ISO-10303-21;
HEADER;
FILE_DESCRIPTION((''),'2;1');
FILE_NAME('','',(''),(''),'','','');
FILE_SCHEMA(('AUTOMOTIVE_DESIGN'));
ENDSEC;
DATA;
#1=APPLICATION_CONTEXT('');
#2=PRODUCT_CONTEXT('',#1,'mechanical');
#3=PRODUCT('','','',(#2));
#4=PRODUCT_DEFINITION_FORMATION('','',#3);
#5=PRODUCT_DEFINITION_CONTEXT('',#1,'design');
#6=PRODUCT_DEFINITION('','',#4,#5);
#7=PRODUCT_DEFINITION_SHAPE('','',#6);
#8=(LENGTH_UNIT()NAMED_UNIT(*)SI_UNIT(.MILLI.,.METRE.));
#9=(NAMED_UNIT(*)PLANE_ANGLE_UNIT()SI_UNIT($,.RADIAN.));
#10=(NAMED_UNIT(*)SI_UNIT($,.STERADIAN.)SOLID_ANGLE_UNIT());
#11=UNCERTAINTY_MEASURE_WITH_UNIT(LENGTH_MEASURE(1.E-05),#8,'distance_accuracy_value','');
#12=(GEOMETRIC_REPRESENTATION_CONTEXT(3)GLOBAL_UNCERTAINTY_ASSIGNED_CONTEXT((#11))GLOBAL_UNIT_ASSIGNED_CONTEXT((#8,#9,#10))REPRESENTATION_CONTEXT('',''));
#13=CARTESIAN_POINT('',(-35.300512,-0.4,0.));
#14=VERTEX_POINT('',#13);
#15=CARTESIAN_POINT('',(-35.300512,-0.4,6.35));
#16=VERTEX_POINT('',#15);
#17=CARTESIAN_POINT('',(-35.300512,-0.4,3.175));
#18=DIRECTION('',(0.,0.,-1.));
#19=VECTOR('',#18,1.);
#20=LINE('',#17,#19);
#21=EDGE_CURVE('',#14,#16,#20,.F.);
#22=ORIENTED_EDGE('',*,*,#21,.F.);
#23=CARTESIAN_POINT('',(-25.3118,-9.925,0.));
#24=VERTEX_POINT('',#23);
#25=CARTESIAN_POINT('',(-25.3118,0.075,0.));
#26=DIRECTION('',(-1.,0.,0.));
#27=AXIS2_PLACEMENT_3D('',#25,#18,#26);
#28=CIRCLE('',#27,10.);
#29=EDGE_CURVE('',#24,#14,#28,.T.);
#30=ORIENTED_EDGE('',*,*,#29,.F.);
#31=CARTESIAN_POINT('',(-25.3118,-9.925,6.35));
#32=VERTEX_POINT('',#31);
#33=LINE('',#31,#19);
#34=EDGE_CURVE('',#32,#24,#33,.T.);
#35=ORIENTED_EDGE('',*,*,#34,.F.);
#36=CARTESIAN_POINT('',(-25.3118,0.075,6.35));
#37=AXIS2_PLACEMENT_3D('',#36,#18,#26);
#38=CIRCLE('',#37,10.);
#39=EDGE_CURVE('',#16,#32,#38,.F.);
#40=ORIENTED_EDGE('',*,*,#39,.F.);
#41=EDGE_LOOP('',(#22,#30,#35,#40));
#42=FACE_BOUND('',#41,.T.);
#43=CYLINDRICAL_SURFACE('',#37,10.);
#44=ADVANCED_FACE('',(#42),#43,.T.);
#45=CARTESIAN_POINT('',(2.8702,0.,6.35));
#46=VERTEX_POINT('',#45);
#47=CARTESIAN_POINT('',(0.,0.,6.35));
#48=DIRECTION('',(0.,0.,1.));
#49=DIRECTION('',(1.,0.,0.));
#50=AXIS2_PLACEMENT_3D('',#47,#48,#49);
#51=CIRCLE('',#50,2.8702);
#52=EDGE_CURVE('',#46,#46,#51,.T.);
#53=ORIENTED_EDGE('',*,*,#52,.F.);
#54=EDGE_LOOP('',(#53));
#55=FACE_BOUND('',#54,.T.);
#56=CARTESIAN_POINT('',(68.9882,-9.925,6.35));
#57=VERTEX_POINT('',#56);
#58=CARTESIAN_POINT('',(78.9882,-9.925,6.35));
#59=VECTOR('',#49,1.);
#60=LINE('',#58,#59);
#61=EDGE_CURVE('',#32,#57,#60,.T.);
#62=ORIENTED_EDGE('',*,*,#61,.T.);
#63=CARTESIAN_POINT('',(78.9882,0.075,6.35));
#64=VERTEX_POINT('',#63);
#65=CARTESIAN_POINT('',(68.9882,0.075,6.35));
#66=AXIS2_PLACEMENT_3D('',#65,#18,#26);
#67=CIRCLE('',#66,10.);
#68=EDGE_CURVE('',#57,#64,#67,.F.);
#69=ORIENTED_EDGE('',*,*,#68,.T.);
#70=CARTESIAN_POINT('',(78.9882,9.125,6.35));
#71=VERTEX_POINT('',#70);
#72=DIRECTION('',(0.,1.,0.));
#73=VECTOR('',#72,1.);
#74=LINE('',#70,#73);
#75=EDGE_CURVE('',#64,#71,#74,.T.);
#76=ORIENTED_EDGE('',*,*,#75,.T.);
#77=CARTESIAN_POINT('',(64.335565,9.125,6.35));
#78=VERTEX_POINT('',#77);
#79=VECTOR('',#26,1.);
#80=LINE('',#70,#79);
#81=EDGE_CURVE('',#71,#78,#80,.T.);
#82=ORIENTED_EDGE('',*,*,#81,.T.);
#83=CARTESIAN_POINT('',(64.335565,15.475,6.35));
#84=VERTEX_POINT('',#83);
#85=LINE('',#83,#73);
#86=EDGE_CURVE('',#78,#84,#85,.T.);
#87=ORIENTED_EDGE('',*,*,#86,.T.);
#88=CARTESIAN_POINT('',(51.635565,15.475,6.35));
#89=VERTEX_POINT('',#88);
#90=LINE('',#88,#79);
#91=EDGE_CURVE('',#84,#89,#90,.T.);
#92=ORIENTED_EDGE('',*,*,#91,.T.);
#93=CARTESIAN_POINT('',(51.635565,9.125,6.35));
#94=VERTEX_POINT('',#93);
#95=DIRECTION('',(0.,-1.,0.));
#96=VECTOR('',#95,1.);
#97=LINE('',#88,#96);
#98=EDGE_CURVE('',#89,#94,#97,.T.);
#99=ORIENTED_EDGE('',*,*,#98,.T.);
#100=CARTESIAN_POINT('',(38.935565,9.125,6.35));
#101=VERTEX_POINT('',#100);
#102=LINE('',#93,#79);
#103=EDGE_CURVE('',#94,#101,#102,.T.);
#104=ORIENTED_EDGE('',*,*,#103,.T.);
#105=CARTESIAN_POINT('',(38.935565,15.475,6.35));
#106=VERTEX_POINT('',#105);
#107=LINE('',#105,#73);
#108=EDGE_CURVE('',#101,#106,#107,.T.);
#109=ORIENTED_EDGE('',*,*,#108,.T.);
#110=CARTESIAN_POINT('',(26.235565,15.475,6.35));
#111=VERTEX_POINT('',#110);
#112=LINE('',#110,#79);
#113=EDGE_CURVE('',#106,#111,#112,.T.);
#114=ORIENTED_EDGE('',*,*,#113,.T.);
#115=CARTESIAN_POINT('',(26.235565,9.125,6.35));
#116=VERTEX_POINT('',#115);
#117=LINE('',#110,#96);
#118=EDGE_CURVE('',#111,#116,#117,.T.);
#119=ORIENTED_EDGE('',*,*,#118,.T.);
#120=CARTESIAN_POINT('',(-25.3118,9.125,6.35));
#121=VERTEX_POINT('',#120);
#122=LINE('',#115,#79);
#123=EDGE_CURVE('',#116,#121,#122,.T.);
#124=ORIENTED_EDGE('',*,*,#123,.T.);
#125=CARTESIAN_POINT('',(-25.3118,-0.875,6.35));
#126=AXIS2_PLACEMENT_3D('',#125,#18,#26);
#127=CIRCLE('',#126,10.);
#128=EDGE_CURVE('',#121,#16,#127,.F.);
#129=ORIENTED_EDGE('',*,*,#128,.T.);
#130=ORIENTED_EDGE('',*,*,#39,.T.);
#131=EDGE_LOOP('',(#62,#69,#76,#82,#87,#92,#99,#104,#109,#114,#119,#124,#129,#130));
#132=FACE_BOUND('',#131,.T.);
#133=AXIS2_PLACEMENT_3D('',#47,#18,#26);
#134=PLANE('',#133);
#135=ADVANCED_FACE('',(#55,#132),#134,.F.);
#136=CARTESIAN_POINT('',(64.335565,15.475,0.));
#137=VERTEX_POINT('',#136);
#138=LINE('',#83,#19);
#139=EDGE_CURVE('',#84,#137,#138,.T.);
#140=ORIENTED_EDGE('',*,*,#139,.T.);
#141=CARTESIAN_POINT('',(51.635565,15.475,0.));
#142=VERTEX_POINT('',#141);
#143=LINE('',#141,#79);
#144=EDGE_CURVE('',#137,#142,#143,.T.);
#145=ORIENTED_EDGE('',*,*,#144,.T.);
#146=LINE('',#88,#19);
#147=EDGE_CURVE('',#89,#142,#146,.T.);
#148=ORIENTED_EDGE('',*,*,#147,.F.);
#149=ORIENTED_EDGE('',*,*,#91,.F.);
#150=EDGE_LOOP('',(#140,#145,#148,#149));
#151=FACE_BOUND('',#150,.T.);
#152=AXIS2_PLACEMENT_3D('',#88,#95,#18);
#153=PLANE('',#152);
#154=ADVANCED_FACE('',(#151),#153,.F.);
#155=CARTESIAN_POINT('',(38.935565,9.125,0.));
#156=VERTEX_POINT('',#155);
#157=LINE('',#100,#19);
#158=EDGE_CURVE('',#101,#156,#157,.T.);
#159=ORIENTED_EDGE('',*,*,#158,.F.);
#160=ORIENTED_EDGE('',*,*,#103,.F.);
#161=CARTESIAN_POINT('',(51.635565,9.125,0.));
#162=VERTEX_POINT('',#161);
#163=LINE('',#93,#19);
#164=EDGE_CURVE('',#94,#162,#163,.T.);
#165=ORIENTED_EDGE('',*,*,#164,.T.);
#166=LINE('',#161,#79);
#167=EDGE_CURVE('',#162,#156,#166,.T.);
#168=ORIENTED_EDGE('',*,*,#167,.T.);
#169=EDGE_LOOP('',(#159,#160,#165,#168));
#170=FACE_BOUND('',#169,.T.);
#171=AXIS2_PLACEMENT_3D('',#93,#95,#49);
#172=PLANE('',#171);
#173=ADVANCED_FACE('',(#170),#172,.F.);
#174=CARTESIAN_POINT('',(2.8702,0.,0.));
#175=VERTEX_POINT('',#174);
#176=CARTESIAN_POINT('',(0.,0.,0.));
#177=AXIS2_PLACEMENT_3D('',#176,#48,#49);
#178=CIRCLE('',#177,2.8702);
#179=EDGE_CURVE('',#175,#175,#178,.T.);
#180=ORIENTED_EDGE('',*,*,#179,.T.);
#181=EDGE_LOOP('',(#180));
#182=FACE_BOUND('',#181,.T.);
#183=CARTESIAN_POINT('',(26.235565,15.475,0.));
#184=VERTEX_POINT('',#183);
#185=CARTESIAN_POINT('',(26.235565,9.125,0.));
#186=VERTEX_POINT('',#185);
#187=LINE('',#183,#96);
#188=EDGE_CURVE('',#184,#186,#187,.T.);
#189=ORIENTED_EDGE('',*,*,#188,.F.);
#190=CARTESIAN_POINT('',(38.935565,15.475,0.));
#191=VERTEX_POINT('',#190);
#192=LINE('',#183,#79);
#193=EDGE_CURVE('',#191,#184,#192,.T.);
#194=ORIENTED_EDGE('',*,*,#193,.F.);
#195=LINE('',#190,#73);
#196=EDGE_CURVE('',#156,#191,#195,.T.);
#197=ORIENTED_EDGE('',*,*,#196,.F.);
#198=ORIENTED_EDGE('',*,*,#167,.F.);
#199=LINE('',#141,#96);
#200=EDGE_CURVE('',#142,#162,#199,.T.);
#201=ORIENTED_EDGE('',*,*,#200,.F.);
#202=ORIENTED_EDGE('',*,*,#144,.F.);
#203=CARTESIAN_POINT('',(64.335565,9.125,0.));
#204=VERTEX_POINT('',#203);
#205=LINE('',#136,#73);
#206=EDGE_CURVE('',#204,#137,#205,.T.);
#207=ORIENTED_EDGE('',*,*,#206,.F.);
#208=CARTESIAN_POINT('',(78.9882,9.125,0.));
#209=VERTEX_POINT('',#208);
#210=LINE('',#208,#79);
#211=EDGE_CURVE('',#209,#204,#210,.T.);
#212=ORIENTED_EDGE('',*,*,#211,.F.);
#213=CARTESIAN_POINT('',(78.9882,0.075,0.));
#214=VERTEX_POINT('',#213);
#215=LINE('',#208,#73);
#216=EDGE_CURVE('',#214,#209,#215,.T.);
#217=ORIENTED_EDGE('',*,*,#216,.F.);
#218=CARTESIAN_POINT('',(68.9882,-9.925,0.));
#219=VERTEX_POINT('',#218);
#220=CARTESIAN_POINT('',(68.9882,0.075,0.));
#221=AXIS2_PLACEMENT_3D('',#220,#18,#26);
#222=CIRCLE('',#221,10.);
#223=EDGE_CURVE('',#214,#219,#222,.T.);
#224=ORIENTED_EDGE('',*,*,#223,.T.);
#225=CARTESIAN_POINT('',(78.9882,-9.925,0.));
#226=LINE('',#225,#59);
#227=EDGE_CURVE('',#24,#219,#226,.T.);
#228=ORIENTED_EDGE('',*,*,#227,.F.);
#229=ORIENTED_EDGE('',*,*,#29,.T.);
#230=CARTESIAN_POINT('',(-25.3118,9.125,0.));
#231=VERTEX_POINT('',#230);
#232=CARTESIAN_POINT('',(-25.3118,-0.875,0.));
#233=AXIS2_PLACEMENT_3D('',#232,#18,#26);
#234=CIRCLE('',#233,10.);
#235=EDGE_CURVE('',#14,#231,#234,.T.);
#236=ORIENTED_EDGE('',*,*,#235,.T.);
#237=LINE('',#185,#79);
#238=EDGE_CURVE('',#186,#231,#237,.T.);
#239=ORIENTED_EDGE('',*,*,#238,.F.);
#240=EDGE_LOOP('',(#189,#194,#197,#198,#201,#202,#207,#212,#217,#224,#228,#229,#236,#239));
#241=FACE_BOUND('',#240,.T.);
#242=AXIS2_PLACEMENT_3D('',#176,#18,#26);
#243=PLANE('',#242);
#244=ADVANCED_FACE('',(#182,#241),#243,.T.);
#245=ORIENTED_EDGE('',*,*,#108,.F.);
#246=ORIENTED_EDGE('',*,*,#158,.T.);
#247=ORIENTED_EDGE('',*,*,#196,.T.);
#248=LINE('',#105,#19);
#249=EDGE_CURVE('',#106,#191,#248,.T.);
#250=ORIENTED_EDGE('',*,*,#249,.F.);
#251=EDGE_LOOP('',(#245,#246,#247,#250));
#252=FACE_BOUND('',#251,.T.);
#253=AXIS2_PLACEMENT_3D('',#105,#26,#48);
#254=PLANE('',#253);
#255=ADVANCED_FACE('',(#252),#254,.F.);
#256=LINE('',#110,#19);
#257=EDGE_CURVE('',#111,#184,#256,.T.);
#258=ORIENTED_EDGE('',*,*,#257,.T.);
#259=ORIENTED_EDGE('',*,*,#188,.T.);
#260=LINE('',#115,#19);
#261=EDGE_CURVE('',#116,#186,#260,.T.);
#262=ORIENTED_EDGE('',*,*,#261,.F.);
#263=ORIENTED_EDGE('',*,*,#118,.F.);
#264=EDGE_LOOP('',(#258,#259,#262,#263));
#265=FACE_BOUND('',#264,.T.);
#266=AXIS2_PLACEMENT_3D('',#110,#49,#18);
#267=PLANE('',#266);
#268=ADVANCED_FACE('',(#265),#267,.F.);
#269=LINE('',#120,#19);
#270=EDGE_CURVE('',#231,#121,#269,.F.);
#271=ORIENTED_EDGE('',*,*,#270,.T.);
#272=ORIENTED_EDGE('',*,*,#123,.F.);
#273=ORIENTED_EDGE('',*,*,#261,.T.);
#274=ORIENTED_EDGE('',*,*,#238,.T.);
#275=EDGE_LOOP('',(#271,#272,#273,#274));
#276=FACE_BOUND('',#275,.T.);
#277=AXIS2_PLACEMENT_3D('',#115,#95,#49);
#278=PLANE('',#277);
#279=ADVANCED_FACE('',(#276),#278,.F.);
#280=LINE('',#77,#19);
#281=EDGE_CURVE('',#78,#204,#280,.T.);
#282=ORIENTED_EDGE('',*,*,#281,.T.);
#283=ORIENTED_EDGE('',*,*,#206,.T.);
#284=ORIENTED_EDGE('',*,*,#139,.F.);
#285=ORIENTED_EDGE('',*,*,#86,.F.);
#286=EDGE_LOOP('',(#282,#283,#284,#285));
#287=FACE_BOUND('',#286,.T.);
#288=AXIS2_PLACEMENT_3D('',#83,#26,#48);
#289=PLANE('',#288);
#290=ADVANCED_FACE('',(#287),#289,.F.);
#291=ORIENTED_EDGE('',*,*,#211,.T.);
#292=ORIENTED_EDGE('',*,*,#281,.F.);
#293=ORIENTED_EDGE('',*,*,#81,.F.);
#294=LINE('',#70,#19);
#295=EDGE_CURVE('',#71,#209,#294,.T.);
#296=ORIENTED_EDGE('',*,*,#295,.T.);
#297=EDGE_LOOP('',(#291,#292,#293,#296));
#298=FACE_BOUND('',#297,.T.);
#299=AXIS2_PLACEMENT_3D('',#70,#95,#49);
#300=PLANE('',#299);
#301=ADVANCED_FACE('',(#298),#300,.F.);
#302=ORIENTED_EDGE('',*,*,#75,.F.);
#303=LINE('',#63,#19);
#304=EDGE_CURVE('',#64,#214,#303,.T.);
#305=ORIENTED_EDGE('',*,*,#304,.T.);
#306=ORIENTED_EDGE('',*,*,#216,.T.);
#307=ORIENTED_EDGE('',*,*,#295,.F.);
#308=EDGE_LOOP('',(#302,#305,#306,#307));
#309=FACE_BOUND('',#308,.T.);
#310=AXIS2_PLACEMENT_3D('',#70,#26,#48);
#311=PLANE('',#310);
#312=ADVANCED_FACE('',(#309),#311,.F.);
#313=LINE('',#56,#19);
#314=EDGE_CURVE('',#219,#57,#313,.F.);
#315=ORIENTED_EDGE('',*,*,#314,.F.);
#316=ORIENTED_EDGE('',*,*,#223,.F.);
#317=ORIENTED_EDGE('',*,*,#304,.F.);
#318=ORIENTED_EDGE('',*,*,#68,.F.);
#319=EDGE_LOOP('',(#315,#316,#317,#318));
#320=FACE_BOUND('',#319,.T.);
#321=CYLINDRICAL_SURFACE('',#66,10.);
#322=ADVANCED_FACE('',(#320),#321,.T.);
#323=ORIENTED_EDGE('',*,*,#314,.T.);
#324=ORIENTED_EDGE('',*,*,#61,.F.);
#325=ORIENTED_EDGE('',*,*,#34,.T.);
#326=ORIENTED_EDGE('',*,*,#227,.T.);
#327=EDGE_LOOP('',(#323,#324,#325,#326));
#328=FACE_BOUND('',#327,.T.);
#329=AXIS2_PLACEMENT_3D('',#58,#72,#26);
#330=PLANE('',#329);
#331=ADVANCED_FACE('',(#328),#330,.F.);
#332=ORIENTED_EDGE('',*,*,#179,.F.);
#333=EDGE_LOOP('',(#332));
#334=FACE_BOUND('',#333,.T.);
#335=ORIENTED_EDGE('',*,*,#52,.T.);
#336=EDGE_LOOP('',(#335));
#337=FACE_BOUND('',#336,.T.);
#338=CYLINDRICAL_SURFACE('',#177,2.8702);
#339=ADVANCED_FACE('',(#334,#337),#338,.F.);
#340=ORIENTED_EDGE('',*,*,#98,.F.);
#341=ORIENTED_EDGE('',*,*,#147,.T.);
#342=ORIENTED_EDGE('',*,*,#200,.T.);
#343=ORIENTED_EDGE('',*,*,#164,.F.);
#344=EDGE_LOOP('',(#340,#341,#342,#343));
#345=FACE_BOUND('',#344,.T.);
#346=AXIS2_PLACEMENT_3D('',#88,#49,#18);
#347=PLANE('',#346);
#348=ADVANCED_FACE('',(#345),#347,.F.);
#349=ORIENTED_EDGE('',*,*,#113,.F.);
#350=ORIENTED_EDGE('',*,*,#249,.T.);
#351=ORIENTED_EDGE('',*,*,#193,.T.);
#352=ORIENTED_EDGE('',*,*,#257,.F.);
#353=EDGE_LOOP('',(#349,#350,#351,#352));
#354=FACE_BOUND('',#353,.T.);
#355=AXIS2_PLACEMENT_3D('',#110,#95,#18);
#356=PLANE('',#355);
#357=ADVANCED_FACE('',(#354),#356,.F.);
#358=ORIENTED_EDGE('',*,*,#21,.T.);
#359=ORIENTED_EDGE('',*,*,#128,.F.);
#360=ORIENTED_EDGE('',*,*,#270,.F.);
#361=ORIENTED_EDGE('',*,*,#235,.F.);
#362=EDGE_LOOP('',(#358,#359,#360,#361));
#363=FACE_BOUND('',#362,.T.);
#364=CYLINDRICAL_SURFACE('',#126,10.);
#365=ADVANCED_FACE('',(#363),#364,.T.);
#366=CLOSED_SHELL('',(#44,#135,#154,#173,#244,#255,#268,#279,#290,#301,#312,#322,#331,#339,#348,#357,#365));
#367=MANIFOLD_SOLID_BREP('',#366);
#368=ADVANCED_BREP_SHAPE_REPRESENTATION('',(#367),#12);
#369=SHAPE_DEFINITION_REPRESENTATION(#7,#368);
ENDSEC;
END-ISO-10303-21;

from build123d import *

# Parameters (mm, degrees)
BOSS_EXTRUDE1_DEPTH = 6.35
FILLET1_R           = 10
SKETCH2_R           = 2.8702
CUT_EXTRUDE1_DEPTH  = 81.739915371


with BuildPart() as part:
    # Sketch1 → Boss-Extrude1 (new body)
    with BuildSketch(Plane.XY):
        Polygon((26.235565231, 15.475), (38.935565231, 15.475), (38.935565231, 9.125), (51.635565231, 9.125), (51.635565231, 15.475), (64.335565231, 15.475), (64.335565231, 9.125), (78.988200442, 9.125), (78.988200442, -9.925), (-35.311799558, -9.925), (-35.311799558, 9.125), (26.235565231, 9.125), align=None)
    extrude(amount=BOSS_EXTRUDE1_DEPTH)

    # Fillet1
    # the kernel refuses this fillet: 10 mm, written as the material it takes off along each edge
    with BuildSketch(Plane(origin=(78.988200442, -9.925, -25), x_dir=(0, 1, 0), z_dir=(0, 0, 1)), Plane(origin=(-35.311799558, 9.125, -25), x_dir=(0, -1, 0), z_dir=(0, 0, 1)), Plane(origin=(-35.311799558, -9.925, -25), x_dir=(1, 0, 0), z_dir=(0, 0, 1))) as fillet1_piece_1:
        with BuildLine():
            CenterArc((FILLET1_R, FILLET1_R), FILLET1_R, 180, 90)
            Line((0, FILLET1_R), (0, 0))
            Line((0, 0), (FILLET1_R, 0))
        make_face()
    extrude(amount=56.35, mode=Mode.SUBTRACT)

    # Sketch2 → Cut-Extrude1 (cut, through all)
    with BuildSketch(Plane.XY.offset(6.35)):
        Circle(SKETCH2_R)
    extrude(amount=-CUT_EXTRUDE1_DEPTH, mode=Mode.SUBTRACT)


solid = part.part
